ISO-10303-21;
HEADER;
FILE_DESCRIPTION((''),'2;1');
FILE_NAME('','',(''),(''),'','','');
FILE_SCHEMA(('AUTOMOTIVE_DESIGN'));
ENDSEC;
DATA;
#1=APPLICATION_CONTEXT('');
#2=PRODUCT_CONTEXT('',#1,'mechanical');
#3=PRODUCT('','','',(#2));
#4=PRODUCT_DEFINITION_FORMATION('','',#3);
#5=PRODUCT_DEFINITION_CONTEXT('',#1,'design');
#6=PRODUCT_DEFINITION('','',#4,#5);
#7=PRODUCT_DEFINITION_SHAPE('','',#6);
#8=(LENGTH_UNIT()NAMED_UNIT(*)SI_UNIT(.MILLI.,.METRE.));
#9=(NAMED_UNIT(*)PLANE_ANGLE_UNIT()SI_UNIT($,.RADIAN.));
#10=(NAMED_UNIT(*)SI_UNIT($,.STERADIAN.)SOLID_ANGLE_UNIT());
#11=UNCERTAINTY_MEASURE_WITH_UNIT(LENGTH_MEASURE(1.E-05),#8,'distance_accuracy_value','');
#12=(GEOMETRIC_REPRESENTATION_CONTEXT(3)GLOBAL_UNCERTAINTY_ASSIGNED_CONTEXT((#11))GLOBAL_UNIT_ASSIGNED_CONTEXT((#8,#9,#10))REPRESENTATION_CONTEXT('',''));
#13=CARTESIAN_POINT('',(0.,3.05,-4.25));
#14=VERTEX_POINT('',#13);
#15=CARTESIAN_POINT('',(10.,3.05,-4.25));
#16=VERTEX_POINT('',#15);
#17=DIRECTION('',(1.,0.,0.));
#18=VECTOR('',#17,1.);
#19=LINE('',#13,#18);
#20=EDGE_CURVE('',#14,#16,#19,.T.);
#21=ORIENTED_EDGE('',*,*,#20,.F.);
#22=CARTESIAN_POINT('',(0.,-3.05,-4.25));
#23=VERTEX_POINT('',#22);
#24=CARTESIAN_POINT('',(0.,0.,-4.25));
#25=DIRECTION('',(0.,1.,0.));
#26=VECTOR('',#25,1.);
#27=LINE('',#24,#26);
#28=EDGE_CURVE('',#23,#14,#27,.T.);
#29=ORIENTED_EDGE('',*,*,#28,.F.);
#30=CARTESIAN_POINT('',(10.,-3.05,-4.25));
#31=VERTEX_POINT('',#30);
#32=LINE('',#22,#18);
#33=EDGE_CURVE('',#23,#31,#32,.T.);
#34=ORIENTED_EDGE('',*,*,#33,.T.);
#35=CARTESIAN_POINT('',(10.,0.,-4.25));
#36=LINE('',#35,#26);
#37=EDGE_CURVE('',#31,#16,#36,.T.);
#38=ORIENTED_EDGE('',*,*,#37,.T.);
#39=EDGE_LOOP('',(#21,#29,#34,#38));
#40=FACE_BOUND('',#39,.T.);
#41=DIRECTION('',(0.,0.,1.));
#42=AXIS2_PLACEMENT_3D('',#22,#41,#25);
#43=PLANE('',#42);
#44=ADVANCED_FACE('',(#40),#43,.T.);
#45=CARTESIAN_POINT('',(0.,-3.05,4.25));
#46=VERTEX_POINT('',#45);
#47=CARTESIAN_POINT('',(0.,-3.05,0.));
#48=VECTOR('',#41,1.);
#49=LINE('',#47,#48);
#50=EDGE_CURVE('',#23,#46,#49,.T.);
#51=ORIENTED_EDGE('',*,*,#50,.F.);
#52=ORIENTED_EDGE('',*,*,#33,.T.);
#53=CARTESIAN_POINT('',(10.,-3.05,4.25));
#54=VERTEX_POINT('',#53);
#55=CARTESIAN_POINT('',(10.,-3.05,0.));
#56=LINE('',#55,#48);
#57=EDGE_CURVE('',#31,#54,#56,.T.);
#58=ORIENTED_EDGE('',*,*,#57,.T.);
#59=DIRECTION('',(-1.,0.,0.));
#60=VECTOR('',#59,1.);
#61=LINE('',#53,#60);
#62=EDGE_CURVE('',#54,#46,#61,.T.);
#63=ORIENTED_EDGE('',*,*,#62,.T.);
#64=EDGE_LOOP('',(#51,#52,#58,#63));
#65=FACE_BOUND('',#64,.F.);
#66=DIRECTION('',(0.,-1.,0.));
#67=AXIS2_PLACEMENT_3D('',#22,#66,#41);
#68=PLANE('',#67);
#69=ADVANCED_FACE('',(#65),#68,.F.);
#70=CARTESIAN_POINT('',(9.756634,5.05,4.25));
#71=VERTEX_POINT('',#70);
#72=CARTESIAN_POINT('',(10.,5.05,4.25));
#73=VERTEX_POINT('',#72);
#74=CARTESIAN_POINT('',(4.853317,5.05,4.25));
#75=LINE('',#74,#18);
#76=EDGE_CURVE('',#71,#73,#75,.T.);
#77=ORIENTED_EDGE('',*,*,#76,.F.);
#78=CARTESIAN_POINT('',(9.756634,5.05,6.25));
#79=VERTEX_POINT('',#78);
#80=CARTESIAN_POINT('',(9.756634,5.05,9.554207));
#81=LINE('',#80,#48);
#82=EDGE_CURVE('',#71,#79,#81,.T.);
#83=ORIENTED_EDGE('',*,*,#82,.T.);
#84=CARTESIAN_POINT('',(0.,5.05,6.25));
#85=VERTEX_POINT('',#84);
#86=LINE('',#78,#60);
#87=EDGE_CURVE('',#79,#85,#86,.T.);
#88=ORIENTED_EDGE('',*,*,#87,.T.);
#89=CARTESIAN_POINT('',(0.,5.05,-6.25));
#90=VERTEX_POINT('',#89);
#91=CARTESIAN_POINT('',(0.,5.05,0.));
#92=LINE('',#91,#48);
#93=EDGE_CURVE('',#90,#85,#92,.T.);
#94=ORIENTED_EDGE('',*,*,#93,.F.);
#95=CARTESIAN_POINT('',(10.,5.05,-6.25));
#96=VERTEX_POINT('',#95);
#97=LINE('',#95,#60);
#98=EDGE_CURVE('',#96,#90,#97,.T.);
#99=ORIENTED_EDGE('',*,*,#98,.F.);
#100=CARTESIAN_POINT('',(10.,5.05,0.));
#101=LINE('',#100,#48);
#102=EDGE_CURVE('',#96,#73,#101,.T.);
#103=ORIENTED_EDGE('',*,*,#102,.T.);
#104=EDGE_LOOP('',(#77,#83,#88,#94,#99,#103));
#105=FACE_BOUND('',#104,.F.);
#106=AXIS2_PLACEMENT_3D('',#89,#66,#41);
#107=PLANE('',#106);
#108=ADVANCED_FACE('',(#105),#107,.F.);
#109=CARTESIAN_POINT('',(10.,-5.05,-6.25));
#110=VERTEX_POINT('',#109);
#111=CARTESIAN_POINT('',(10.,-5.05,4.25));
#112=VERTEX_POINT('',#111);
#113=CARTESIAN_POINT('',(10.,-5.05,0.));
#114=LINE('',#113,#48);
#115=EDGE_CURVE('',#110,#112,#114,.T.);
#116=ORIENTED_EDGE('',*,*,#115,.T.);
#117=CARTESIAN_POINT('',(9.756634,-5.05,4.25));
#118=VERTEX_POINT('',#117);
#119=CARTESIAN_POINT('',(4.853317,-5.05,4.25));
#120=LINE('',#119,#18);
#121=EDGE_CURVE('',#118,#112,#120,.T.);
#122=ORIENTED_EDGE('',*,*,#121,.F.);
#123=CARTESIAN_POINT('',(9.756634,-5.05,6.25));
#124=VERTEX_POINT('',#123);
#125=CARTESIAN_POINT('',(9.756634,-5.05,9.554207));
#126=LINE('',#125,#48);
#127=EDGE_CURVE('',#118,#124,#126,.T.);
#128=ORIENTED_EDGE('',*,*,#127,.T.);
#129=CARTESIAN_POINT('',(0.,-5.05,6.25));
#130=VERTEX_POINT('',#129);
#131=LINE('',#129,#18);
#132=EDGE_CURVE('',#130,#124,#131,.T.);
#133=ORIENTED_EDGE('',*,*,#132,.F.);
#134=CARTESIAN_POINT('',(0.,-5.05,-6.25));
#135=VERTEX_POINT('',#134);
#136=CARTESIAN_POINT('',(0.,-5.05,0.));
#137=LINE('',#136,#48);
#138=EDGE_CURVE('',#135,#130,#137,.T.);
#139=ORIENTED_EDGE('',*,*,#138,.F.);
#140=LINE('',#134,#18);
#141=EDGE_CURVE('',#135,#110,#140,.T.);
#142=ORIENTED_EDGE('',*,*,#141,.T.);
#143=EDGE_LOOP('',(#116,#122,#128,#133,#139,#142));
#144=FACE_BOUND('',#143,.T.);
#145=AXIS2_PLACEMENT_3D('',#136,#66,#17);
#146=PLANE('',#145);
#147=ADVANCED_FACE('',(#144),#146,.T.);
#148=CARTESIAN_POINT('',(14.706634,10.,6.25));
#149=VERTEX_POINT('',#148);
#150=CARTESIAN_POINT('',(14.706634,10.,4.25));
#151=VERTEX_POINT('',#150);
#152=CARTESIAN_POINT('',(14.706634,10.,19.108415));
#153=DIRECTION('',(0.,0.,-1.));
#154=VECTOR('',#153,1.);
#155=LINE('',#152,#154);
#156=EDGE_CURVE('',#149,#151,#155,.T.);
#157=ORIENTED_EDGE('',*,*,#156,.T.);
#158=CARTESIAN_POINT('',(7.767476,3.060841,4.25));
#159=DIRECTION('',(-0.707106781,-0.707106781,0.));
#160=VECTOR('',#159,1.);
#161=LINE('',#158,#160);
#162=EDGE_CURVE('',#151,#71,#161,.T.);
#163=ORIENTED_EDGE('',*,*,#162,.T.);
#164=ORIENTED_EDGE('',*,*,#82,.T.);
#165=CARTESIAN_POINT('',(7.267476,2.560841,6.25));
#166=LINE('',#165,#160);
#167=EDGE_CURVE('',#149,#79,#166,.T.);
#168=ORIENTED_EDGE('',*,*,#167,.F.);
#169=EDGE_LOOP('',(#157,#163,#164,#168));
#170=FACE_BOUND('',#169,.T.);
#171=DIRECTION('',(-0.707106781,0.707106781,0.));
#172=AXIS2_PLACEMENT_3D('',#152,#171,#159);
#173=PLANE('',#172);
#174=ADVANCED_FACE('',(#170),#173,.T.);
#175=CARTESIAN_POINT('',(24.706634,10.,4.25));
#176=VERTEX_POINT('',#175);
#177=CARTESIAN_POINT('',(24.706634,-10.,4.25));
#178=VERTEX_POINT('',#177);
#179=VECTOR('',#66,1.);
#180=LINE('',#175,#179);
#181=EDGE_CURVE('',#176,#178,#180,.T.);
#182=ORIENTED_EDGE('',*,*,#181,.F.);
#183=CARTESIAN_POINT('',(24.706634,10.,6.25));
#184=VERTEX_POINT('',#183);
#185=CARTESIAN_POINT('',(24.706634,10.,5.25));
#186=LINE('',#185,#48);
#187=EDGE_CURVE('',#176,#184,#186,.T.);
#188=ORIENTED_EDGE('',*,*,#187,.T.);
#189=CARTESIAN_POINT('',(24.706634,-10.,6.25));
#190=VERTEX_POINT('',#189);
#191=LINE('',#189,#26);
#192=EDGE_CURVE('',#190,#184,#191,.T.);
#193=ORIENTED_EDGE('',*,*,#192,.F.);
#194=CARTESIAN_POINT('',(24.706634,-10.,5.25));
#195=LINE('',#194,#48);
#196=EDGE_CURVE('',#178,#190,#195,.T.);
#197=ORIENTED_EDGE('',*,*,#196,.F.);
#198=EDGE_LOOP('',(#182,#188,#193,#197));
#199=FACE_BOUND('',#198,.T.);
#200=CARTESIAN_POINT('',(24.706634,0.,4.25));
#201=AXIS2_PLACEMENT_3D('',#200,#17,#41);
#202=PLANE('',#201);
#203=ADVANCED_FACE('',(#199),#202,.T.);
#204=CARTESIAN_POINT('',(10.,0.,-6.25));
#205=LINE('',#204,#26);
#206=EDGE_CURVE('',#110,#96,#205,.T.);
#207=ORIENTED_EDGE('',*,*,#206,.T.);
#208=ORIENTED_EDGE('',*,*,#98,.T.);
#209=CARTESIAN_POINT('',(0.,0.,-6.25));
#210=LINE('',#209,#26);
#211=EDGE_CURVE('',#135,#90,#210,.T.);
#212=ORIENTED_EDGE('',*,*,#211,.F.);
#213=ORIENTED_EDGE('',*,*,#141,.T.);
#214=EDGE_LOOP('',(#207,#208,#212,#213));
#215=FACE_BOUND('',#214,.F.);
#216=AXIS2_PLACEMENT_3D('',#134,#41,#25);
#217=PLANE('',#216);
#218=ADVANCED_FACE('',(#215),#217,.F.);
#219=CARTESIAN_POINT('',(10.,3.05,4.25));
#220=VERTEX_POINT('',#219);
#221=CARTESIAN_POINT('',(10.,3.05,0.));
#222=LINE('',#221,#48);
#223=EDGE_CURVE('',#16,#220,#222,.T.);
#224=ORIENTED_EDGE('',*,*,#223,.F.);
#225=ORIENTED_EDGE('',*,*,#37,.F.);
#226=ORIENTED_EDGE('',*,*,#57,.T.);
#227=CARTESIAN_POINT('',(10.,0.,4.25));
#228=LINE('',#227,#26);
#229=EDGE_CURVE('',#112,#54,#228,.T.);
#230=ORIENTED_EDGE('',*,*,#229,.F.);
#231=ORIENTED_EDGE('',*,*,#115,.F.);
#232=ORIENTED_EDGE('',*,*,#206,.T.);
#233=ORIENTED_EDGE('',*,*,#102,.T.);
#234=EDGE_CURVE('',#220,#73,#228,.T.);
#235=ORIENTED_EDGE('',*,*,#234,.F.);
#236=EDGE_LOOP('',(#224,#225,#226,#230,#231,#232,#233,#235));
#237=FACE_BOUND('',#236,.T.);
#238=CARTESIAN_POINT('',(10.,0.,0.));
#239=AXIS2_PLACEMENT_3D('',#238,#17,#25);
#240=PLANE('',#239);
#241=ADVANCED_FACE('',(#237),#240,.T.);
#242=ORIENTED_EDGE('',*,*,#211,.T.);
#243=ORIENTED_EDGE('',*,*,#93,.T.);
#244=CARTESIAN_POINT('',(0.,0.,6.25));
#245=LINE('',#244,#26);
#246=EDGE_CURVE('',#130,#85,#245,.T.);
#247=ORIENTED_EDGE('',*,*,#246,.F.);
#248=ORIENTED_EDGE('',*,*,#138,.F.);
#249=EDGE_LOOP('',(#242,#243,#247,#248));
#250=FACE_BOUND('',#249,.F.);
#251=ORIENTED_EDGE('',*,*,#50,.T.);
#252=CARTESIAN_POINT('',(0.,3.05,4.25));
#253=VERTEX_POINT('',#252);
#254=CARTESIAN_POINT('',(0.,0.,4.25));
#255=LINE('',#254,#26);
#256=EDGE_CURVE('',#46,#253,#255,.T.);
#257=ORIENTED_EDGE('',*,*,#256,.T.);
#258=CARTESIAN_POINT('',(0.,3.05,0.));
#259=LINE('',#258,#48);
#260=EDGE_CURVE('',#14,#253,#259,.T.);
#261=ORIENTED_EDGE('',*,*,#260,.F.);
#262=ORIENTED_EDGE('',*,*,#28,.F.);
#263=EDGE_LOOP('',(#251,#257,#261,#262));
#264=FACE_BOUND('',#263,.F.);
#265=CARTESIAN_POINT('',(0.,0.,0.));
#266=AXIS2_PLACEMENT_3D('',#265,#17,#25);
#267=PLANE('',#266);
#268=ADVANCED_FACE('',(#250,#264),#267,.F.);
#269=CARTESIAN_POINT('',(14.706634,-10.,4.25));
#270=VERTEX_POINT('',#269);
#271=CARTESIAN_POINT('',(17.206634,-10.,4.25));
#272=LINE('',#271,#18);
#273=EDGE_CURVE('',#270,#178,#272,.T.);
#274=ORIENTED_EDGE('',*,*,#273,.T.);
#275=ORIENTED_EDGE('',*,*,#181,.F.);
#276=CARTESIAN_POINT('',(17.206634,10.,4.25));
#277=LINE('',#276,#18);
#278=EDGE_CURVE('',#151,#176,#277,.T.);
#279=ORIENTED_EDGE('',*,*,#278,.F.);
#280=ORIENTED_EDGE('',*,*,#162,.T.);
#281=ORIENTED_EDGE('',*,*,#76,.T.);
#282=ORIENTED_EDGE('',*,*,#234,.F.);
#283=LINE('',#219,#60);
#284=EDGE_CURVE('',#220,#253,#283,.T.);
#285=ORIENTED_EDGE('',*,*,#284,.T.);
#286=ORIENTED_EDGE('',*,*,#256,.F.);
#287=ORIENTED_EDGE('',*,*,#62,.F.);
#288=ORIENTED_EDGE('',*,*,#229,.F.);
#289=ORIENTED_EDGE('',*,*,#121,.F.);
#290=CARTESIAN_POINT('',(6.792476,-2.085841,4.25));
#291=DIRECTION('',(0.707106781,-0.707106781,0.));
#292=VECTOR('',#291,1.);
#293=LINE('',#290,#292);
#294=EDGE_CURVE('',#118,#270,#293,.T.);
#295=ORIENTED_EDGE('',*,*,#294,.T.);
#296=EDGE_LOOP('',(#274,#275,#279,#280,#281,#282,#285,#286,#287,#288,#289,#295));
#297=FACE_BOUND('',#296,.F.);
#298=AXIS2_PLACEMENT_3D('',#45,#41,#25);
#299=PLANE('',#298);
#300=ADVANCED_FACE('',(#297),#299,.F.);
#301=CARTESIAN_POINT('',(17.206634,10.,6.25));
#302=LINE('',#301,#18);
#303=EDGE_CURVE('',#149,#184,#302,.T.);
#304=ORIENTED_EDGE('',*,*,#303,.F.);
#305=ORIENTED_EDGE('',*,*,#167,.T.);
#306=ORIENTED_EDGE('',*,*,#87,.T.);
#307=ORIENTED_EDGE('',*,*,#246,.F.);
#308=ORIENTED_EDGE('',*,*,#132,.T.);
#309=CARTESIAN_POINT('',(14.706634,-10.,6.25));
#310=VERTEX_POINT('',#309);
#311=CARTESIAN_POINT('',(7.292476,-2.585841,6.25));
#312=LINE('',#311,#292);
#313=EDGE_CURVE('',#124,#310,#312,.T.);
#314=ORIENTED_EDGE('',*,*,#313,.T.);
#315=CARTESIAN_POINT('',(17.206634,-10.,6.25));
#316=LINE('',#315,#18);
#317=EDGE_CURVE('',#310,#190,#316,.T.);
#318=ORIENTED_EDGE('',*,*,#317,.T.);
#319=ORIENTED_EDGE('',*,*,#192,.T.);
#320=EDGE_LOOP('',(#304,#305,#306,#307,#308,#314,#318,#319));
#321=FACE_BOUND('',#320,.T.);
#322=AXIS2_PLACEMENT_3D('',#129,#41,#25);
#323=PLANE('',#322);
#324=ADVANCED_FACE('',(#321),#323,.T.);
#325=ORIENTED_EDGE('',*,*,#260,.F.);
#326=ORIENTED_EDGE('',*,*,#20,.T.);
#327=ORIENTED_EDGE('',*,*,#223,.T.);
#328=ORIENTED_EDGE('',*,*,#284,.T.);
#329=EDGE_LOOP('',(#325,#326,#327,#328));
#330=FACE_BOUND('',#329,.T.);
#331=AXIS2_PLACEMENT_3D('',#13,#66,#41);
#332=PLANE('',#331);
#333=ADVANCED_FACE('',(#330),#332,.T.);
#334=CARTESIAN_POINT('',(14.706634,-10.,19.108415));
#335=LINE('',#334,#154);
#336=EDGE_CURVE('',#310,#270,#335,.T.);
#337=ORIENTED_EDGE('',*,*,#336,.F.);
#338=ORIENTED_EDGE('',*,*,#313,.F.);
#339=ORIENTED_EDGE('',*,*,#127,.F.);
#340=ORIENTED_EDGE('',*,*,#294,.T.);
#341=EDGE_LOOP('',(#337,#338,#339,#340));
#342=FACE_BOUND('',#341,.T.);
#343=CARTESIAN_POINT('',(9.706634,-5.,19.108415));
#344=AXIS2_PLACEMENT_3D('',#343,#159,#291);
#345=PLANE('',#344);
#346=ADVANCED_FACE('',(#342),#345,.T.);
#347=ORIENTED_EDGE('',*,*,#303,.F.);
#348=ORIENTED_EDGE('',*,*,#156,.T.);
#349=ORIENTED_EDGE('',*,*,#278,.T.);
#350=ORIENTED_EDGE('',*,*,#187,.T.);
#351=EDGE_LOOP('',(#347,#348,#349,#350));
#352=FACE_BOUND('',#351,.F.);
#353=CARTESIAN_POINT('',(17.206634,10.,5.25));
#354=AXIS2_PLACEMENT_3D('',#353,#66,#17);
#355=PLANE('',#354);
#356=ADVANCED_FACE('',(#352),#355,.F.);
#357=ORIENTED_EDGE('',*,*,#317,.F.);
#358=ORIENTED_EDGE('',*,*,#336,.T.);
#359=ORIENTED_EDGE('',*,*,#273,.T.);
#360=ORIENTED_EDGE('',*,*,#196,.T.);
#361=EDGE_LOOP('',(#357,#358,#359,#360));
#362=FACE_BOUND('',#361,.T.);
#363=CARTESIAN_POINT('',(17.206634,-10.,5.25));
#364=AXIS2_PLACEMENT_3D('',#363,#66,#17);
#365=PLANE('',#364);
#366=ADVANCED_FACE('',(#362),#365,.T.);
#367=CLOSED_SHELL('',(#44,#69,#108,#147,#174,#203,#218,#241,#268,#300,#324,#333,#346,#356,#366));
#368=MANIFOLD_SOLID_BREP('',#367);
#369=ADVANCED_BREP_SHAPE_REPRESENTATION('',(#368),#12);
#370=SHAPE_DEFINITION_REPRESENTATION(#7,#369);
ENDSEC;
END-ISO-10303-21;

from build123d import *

# Parameters (mm, degrees)
F0_W        = 10.1
F0_H        = 12.5
F0_W_2      = 6.1
F0_H_2      = 8.5
F1_DEPTH    = 10
F2_W        = 15
F2_H        = 2
F3_DEPTH    = 10
F4_T4_DEPTH = 27.7168298797
F4_T9_DEPTH = 27.7168298797


# Not quite as in the source:
# - a fillet or chamfer that OpenCascade refuses, or shapes differently, is made with other operations: its cross-section is extruded or revolved along the edge and cut away or added


with BuildPart() as f1:
    # F0 (on Right) → F1 (new body)
    with BuildSketch(Plane.YZ):
        Rectangle(F0_W, F0_H)
        Rectangle(F0_W_2, F0_H_2, mode=Mode.SUBTRACT)
    extrude(amount=F1_DEPTH)

    # F2 (on Front) → F3 (join, symmetric)
    with BuildSketch(Plane.XZ):
        with Locations((17.2066340968, 5.25)):
            Rectangle(F2_W, F2_H)
    extrude(amount=F3_DEPTH, both=True)

    # F4: chamfer of 5 on 2 edges, made by hand


with BuildPart() as f4_tool2:
    # F4_s3 → F4_t4 (new body)
    with BuildSketch(Plane.XY.offset(19.1084149398)):
        Polygon((14.7066340968, 10), (9.7066340968, 5), (9.7066340968, 10), align=None)
    extrude(amount=-F4_T4_DEPTH)

    split(bisect_by=Plane.XZ.offset(-5.05), keep=Keep.BOTTOM)


with BuildPart() as f1_1:
    add(f1.part)

    # F4_t1: cut F4_tool2
    add(f4_tool2.part, mode=Mode.SUBTRACT)


with BuildPart() as f4_tool7:
    # F4_s8 → F4_t9 (new body)
    with BuildSketch(Plane.XY.offset(19.1084149398)):
        Polygon((9.7066340968, -5), (14.7066340968, -10), (9.7066340968, -10), align=None)
    extrude(amount=-F4_T9_DEPTH)

    split(bisect_by=Plane.XZ.offset(5.05), keep=Keep.TOP)


with BuildPart() as f1_2:
    add(f1_1.part)

    # F4_t6: cut F4_tool7
    add(f4_tool7.part, mode=Mode.SUBTRACT)


solid = f1_2.part
